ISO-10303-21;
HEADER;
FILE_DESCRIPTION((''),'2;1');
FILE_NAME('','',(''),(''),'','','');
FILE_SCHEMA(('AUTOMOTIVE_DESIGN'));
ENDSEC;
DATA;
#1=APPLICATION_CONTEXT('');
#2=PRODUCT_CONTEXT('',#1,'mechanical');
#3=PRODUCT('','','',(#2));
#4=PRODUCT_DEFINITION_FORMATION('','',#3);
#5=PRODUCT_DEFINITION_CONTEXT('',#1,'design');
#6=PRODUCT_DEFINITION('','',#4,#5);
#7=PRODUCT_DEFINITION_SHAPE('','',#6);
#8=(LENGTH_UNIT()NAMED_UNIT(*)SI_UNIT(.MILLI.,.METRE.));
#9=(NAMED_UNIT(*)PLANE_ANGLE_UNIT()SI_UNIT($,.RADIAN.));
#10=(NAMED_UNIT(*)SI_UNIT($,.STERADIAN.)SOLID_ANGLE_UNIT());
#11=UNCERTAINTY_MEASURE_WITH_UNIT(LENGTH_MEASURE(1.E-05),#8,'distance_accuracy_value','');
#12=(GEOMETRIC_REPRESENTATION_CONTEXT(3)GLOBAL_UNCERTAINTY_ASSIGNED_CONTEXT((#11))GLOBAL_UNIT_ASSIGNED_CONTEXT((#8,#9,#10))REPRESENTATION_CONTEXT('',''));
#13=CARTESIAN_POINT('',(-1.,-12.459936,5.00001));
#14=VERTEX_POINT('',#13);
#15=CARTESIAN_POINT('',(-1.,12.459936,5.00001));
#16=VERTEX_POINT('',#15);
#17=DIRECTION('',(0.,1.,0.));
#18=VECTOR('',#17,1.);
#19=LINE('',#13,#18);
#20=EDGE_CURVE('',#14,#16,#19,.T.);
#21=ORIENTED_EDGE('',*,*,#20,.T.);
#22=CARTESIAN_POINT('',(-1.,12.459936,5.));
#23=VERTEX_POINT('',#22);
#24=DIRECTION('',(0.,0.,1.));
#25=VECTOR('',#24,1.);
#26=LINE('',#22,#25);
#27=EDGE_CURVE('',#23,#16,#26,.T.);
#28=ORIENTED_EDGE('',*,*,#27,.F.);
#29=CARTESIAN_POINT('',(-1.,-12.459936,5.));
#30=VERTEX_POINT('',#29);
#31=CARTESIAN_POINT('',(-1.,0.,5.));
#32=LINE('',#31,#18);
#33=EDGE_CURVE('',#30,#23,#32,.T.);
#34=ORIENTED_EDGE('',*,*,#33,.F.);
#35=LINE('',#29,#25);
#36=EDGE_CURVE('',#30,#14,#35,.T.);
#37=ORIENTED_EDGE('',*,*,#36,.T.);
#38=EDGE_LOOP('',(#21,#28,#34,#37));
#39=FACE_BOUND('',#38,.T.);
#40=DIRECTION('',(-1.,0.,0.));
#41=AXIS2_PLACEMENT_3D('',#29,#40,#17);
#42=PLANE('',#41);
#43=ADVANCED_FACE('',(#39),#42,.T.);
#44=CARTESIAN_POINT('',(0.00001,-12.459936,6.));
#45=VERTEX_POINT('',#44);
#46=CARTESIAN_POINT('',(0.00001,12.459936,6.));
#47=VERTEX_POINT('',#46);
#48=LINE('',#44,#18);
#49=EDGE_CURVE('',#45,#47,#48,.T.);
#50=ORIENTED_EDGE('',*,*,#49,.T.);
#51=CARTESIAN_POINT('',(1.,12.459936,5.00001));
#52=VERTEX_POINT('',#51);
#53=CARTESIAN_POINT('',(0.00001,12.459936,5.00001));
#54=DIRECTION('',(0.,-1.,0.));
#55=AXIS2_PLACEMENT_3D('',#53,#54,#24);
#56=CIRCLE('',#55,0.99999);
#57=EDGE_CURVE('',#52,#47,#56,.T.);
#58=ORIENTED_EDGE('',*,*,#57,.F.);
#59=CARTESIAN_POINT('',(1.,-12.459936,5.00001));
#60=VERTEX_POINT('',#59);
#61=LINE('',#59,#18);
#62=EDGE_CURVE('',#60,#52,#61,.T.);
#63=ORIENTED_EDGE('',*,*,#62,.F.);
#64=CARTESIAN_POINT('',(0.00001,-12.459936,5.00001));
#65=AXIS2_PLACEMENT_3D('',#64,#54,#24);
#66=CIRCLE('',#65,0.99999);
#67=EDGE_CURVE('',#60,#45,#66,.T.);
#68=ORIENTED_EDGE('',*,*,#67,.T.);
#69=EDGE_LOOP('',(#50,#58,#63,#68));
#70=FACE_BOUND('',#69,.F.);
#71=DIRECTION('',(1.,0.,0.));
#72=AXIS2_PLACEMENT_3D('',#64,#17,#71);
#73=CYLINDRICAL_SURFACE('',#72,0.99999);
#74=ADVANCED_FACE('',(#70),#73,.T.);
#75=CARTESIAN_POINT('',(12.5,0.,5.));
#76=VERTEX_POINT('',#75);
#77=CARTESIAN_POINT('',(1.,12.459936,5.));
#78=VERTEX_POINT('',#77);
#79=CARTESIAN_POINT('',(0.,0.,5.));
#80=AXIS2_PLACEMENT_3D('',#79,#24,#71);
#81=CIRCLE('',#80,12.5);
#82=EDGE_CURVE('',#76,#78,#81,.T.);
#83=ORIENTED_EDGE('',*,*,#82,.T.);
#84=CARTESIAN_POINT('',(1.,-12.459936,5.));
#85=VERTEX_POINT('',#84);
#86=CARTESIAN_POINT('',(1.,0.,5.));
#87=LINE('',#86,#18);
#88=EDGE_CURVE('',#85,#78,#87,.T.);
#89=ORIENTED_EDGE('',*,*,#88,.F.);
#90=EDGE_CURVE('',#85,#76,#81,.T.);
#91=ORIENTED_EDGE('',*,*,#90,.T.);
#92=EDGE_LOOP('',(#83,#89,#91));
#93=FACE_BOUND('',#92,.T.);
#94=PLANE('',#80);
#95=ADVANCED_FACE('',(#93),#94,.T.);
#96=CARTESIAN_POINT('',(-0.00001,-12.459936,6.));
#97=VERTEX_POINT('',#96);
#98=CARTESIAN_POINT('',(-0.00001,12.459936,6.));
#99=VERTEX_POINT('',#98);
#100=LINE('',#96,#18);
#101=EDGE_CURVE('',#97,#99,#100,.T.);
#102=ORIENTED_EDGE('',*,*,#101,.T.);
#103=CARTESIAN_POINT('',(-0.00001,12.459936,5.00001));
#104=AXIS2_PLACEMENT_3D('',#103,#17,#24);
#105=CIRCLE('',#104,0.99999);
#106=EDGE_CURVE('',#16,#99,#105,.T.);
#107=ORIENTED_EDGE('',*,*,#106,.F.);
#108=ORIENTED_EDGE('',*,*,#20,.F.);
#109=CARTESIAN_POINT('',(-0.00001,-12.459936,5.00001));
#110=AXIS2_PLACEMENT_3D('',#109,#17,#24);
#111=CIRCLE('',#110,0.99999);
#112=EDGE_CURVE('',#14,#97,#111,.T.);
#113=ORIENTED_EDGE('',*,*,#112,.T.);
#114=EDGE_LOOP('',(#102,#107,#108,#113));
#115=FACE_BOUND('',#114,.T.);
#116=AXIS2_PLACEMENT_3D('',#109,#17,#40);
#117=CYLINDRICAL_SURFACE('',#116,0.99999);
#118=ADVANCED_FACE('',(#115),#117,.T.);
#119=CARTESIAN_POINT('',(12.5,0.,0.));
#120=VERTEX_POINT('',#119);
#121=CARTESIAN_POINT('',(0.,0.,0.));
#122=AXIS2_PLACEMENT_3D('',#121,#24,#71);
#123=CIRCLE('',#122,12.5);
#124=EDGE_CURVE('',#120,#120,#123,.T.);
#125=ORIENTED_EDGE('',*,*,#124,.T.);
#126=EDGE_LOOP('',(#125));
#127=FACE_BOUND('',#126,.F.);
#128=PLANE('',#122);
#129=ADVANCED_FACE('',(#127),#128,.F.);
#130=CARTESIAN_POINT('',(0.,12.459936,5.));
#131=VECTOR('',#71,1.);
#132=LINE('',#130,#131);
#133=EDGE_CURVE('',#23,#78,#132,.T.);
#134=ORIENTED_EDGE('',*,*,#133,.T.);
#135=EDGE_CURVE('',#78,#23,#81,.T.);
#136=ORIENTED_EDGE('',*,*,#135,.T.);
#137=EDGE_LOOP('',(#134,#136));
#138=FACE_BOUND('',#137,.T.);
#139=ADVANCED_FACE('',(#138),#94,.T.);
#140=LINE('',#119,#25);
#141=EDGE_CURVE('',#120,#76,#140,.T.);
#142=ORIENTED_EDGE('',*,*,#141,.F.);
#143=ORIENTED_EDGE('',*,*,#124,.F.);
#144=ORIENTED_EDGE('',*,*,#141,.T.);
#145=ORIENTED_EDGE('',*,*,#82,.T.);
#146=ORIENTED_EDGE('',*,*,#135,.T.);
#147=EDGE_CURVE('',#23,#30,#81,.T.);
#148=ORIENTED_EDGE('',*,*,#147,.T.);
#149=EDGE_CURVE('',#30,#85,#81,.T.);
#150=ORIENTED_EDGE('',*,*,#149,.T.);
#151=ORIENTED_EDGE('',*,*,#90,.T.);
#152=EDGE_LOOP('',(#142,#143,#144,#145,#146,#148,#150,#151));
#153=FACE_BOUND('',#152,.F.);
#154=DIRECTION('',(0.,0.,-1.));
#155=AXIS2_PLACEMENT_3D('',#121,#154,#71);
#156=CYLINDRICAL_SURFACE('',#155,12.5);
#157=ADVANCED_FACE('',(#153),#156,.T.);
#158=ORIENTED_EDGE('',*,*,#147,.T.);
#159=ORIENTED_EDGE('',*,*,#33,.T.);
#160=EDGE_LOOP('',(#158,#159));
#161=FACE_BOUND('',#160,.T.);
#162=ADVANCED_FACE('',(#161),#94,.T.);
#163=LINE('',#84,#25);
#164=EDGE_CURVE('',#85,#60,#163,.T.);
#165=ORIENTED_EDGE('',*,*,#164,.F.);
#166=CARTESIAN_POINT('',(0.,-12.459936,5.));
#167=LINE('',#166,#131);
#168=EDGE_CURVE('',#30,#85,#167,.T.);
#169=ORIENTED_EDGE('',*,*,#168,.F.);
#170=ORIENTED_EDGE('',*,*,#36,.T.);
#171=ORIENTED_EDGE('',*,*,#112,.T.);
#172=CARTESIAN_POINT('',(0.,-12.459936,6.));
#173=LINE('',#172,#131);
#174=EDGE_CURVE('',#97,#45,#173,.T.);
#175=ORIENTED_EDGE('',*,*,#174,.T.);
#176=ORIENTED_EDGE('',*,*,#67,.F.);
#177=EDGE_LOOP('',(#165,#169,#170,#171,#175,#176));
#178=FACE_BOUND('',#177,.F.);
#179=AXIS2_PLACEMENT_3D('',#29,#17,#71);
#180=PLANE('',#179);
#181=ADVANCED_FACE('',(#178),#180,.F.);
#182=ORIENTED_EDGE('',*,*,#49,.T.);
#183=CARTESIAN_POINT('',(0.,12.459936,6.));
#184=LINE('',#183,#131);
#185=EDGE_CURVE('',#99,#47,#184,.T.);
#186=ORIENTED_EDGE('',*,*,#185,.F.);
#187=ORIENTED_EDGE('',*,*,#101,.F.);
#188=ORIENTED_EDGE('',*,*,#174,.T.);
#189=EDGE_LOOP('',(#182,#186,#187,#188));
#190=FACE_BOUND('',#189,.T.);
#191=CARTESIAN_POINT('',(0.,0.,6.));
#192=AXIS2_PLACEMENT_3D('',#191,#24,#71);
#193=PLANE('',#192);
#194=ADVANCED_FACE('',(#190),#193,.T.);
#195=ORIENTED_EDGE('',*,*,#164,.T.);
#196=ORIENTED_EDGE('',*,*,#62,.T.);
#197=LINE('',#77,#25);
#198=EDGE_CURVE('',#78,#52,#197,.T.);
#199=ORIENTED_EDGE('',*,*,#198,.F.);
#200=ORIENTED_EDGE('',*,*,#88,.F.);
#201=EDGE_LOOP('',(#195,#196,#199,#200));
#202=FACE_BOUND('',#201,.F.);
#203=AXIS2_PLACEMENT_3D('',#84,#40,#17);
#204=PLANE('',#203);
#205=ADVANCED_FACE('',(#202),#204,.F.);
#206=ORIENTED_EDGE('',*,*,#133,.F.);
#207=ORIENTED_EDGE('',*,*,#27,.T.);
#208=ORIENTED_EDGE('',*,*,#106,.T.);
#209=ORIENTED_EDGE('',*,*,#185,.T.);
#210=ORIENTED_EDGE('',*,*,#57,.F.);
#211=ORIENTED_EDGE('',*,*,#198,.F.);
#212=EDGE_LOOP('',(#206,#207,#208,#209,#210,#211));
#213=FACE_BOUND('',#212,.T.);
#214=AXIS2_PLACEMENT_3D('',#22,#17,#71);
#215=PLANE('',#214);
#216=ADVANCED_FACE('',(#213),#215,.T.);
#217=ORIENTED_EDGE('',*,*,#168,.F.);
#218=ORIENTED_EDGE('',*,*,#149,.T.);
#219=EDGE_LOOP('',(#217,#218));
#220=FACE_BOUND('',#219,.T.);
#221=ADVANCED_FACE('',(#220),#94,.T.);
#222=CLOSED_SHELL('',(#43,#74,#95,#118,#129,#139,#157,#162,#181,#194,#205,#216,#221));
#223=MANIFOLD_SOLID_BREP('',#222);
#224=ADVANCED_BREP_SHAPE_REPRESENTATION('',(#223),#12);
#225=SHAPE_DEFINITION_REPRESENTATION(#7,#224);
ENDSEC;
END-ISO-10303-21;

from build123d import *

# Parameters (mm, degrees)
F0_R     = 12.5
F1_DEPTH = 5
F2_W     = 2
F2_H     = 24.9198715888
F3_DEPTH = 1
F4_R     = 0.99999


# Not quite as in the source:
# - a fillet or chamfer is up to 0.001 mm smaller than in the source, because OpenCascade refuses the exact size


with BuildPart() as f1:
    # F0 (on Top) → F1 (new body)
    with BuildSketch(Plane.XY):
        Circle(F0_R)
    extrude(amount=F1_DEPTH)

    # F2 (on face) → F3 (join)
    with BuildSketch(Plane.XY.offset(5)):
        Rectangle(F2_W, F2_H)
    extrude(amount=F3_DEPTH)

    # F4 (radius 1 in the source; OpenCascade refuses exactly that, so slightly less here)
    f4_edges = [f1.edges().sort_by_distance(p)[0] for p in [
        (1, 0, 6),
        (-1, 0, 6),
    ]]
    fillet(f4_edges, radius=F4_R)


solid = f1.part
